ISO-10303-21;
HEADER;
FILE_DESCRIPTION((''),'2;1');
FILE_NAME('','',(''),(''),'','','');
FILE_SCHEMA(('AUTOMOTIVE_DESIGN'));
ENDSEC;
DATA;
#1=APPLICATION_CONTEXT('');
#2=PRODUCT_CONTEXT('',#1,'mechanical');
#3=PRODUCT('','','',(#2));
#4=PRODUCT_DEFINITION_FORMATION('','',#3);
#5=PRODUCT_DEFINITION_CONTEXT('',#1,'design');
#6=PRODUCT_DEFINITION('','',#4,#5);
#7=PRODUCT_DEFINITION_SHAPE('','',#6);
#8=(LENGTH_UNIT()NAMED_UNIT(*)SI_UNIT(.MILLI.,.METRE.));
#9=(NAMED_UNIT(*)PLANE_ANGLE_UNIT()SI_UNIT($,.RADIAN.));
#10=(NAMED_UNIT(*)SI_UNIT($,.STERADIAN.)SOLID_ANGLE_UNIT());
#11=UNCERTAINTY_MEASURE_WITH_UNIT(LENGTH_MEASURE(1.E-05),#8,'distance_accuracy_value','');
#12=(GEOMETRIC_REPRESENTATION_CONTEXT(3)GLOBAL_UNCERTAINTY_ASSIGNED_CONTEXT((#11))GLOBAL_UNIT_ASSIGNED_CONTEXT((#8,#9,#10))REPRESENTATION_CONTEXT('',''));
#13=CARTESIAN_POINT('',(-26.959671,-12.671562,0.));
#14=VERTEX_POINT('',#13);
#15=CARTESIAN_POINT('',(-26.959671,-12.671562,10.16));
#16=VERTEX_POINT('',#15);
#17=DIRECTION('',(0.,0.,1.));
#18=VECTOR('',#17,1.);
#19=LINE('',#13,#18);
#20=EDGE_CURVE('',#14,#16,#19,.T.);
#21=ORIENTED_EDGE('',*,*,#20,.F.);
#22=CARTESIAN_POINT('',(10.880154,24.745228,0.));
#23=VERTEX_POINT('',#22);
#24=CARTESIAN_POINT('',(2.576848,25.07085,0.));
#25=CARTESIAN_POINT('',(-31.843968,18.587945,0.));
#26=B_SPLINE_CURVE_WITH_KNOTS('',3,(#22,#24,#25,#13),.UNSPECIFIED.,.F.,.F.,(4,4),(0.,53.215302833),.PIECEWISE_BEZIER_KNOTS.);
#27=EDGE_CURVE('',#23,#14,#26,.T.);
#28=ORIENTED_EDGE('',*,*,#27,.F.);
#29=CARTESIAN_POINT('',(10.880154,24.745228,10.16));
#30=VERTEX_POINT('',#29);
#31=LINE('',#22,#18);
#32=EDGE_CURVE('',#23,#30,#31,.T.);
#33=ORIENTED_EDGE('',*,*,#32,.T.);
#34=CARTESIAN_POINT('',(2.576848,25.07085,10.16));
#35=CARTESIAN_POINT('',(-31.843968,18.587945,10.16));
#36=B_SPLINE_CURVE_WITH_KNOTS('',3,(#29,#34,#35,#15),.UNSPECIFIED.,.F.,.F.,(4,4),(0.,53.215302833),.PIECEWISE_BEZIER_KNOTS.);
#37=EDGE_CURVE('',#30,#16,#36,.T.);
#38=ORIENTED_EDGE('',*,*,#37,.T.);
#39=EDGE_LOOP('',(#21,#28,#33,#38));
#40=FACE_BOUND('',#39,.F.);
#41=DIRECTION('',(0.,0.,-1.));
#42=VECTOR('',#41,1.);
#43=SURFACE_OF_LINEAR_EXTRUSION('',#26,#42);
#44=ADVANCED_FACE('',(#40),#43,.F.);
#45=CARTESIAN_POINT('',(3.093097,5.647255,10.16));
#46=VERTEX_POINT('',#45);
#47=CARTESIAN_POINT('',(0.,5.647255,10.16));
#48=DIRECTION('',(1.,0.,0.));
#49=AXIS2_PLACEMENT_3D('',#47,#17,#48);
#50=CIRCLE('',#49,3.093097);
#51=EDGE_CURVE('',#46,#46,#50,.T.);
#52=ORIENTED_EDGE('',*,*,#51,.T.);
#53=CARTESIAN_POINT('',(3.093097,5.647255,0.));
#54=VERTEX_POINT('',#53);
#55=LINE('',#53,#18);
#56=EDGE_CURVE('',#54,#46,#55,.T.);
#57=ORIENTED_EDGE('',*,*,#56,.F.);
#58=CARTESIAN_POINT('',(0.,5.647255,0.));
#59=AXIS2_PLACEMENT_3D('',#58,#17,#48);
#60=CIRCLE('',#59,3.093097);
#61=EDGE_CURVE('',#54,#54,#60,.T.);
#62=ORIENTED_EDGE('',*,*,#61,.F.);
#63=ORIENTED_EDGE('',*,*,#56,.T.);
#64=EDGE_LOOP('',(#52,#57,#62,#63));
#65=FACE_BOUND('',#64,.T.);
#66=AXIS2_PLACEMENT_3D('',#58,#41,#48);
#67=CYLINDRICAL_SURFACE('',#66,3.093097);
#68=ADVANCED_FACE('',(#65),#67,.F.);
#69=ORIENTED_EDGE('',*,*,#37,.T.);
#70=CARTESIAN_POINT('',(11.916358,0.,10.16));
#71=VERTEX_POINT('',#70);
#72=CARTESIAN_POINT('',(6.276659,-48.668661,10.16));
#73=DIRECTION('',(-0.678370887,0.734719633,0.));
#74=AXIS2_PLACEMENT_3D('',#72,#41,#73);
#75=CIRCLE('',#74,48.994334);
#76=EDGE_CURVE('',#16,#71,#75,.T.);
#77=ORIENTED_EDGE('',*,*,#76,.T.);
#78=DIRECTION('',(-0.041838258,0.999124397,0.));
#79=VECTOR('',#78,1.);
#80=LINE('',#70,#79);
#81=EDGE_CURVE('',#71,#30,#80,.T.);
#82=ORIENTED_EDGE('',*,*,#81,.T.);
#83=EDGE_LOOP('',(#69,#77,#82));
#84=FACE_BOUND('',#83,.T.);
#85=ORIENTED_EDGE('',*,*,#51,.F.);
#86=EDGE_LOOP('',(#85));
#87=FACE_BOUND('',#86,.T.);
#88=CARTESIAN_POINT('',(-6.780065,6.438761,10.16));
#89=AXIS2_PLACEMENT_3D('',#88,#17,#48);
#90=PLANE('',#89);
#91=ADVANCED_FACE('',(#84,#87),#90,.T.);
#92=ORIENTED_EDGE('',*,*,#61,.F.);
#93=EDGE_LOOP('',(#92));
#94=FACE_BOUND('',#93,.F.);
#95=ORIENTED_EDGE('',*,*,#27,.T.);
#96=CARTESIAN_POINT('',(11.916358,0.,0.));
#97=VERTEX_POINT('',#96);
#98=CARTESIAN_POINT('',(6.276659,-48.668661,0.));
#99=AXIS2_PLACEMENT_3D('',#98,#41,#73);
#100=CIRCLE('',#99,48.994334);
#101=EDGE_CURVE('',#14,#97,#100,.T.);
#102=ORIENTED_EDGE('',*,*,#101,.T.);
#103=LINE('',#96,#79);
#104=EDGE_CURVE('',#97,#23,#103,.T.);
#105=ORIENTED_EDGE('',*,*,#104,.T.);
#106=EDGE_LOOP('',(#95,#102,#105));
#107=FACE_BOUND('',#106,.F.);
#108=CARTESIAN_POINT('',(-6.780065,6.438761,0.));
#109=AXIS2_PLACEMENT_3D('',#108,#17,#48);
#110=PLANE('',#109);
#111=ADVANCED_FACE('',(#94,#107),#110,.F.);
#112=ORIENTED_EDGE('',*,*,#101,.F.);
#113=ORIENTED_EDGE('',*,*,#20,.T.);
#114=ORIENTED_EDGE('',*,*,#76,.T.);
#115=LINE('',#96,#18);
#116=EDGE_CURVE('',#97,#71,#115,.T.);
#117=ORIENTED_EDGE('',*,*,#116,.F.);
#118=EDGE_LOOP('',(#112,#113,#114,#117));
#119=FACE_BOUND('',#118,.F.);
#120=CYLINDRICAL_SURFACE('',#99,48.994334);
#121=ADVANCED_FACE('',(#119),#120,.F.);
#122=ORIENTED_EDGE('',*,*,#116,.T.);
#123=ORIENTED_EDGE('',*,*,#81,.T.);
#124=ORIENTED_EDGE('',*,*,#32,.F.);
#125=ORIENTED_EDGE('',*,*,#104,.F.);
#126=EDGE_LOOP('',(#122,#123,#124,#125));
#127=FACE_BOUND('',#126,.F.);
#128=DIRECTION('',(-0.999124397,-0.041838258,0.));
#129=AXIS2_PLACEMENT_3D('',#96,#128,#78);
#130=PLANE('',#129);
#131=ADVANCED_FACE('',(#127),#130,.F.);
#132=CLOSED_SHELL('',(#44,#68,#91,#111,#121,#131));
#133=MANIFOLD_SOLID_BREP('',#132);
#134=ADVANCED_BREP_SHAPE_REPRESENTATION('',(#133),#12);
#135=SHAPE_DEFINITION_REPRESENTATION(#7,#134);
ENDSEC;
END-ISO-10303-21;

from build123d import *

# Parameters (mm, degrees)
F0_R     = 3.0930971136
F1_DEPTH = 10.16


# Not quite as in the source:
# - a feature names something its author has since deleted; it is built from what else it names


with BuildPart() as f1:
    # F0 (on Top) → F1 (new body)
    with BuildSketch(Plane.XY):
        with BuildLine():
            Line((11.9163581484, 0), (10.8801536262, 24.745227769))
            add(Edge.make_bspline(
                [(10.8801536262, 24.745227769), (2.5768475607, 25.0708498061), (-31.8439677358, 18.5879450291), (-26.9596707076, -12.6715619117)],
                knots=[0, 0, 0, 0, 53.2153028331, 53.2153028331, 53.2153028331, 53.2153028331], degree=3))
            ThreePointArc((-26.9596707076, -12.6715619117), (-8.9067406272, -2.0863774931), (11.9163581484, 0))
        make_face()
        with Locations((0, 5.6472551078)):
            Circle(F0_R, mode=Mode.SUBTRACT)
    extrude(amount=F1_DEPTH)


solid = f1.part
